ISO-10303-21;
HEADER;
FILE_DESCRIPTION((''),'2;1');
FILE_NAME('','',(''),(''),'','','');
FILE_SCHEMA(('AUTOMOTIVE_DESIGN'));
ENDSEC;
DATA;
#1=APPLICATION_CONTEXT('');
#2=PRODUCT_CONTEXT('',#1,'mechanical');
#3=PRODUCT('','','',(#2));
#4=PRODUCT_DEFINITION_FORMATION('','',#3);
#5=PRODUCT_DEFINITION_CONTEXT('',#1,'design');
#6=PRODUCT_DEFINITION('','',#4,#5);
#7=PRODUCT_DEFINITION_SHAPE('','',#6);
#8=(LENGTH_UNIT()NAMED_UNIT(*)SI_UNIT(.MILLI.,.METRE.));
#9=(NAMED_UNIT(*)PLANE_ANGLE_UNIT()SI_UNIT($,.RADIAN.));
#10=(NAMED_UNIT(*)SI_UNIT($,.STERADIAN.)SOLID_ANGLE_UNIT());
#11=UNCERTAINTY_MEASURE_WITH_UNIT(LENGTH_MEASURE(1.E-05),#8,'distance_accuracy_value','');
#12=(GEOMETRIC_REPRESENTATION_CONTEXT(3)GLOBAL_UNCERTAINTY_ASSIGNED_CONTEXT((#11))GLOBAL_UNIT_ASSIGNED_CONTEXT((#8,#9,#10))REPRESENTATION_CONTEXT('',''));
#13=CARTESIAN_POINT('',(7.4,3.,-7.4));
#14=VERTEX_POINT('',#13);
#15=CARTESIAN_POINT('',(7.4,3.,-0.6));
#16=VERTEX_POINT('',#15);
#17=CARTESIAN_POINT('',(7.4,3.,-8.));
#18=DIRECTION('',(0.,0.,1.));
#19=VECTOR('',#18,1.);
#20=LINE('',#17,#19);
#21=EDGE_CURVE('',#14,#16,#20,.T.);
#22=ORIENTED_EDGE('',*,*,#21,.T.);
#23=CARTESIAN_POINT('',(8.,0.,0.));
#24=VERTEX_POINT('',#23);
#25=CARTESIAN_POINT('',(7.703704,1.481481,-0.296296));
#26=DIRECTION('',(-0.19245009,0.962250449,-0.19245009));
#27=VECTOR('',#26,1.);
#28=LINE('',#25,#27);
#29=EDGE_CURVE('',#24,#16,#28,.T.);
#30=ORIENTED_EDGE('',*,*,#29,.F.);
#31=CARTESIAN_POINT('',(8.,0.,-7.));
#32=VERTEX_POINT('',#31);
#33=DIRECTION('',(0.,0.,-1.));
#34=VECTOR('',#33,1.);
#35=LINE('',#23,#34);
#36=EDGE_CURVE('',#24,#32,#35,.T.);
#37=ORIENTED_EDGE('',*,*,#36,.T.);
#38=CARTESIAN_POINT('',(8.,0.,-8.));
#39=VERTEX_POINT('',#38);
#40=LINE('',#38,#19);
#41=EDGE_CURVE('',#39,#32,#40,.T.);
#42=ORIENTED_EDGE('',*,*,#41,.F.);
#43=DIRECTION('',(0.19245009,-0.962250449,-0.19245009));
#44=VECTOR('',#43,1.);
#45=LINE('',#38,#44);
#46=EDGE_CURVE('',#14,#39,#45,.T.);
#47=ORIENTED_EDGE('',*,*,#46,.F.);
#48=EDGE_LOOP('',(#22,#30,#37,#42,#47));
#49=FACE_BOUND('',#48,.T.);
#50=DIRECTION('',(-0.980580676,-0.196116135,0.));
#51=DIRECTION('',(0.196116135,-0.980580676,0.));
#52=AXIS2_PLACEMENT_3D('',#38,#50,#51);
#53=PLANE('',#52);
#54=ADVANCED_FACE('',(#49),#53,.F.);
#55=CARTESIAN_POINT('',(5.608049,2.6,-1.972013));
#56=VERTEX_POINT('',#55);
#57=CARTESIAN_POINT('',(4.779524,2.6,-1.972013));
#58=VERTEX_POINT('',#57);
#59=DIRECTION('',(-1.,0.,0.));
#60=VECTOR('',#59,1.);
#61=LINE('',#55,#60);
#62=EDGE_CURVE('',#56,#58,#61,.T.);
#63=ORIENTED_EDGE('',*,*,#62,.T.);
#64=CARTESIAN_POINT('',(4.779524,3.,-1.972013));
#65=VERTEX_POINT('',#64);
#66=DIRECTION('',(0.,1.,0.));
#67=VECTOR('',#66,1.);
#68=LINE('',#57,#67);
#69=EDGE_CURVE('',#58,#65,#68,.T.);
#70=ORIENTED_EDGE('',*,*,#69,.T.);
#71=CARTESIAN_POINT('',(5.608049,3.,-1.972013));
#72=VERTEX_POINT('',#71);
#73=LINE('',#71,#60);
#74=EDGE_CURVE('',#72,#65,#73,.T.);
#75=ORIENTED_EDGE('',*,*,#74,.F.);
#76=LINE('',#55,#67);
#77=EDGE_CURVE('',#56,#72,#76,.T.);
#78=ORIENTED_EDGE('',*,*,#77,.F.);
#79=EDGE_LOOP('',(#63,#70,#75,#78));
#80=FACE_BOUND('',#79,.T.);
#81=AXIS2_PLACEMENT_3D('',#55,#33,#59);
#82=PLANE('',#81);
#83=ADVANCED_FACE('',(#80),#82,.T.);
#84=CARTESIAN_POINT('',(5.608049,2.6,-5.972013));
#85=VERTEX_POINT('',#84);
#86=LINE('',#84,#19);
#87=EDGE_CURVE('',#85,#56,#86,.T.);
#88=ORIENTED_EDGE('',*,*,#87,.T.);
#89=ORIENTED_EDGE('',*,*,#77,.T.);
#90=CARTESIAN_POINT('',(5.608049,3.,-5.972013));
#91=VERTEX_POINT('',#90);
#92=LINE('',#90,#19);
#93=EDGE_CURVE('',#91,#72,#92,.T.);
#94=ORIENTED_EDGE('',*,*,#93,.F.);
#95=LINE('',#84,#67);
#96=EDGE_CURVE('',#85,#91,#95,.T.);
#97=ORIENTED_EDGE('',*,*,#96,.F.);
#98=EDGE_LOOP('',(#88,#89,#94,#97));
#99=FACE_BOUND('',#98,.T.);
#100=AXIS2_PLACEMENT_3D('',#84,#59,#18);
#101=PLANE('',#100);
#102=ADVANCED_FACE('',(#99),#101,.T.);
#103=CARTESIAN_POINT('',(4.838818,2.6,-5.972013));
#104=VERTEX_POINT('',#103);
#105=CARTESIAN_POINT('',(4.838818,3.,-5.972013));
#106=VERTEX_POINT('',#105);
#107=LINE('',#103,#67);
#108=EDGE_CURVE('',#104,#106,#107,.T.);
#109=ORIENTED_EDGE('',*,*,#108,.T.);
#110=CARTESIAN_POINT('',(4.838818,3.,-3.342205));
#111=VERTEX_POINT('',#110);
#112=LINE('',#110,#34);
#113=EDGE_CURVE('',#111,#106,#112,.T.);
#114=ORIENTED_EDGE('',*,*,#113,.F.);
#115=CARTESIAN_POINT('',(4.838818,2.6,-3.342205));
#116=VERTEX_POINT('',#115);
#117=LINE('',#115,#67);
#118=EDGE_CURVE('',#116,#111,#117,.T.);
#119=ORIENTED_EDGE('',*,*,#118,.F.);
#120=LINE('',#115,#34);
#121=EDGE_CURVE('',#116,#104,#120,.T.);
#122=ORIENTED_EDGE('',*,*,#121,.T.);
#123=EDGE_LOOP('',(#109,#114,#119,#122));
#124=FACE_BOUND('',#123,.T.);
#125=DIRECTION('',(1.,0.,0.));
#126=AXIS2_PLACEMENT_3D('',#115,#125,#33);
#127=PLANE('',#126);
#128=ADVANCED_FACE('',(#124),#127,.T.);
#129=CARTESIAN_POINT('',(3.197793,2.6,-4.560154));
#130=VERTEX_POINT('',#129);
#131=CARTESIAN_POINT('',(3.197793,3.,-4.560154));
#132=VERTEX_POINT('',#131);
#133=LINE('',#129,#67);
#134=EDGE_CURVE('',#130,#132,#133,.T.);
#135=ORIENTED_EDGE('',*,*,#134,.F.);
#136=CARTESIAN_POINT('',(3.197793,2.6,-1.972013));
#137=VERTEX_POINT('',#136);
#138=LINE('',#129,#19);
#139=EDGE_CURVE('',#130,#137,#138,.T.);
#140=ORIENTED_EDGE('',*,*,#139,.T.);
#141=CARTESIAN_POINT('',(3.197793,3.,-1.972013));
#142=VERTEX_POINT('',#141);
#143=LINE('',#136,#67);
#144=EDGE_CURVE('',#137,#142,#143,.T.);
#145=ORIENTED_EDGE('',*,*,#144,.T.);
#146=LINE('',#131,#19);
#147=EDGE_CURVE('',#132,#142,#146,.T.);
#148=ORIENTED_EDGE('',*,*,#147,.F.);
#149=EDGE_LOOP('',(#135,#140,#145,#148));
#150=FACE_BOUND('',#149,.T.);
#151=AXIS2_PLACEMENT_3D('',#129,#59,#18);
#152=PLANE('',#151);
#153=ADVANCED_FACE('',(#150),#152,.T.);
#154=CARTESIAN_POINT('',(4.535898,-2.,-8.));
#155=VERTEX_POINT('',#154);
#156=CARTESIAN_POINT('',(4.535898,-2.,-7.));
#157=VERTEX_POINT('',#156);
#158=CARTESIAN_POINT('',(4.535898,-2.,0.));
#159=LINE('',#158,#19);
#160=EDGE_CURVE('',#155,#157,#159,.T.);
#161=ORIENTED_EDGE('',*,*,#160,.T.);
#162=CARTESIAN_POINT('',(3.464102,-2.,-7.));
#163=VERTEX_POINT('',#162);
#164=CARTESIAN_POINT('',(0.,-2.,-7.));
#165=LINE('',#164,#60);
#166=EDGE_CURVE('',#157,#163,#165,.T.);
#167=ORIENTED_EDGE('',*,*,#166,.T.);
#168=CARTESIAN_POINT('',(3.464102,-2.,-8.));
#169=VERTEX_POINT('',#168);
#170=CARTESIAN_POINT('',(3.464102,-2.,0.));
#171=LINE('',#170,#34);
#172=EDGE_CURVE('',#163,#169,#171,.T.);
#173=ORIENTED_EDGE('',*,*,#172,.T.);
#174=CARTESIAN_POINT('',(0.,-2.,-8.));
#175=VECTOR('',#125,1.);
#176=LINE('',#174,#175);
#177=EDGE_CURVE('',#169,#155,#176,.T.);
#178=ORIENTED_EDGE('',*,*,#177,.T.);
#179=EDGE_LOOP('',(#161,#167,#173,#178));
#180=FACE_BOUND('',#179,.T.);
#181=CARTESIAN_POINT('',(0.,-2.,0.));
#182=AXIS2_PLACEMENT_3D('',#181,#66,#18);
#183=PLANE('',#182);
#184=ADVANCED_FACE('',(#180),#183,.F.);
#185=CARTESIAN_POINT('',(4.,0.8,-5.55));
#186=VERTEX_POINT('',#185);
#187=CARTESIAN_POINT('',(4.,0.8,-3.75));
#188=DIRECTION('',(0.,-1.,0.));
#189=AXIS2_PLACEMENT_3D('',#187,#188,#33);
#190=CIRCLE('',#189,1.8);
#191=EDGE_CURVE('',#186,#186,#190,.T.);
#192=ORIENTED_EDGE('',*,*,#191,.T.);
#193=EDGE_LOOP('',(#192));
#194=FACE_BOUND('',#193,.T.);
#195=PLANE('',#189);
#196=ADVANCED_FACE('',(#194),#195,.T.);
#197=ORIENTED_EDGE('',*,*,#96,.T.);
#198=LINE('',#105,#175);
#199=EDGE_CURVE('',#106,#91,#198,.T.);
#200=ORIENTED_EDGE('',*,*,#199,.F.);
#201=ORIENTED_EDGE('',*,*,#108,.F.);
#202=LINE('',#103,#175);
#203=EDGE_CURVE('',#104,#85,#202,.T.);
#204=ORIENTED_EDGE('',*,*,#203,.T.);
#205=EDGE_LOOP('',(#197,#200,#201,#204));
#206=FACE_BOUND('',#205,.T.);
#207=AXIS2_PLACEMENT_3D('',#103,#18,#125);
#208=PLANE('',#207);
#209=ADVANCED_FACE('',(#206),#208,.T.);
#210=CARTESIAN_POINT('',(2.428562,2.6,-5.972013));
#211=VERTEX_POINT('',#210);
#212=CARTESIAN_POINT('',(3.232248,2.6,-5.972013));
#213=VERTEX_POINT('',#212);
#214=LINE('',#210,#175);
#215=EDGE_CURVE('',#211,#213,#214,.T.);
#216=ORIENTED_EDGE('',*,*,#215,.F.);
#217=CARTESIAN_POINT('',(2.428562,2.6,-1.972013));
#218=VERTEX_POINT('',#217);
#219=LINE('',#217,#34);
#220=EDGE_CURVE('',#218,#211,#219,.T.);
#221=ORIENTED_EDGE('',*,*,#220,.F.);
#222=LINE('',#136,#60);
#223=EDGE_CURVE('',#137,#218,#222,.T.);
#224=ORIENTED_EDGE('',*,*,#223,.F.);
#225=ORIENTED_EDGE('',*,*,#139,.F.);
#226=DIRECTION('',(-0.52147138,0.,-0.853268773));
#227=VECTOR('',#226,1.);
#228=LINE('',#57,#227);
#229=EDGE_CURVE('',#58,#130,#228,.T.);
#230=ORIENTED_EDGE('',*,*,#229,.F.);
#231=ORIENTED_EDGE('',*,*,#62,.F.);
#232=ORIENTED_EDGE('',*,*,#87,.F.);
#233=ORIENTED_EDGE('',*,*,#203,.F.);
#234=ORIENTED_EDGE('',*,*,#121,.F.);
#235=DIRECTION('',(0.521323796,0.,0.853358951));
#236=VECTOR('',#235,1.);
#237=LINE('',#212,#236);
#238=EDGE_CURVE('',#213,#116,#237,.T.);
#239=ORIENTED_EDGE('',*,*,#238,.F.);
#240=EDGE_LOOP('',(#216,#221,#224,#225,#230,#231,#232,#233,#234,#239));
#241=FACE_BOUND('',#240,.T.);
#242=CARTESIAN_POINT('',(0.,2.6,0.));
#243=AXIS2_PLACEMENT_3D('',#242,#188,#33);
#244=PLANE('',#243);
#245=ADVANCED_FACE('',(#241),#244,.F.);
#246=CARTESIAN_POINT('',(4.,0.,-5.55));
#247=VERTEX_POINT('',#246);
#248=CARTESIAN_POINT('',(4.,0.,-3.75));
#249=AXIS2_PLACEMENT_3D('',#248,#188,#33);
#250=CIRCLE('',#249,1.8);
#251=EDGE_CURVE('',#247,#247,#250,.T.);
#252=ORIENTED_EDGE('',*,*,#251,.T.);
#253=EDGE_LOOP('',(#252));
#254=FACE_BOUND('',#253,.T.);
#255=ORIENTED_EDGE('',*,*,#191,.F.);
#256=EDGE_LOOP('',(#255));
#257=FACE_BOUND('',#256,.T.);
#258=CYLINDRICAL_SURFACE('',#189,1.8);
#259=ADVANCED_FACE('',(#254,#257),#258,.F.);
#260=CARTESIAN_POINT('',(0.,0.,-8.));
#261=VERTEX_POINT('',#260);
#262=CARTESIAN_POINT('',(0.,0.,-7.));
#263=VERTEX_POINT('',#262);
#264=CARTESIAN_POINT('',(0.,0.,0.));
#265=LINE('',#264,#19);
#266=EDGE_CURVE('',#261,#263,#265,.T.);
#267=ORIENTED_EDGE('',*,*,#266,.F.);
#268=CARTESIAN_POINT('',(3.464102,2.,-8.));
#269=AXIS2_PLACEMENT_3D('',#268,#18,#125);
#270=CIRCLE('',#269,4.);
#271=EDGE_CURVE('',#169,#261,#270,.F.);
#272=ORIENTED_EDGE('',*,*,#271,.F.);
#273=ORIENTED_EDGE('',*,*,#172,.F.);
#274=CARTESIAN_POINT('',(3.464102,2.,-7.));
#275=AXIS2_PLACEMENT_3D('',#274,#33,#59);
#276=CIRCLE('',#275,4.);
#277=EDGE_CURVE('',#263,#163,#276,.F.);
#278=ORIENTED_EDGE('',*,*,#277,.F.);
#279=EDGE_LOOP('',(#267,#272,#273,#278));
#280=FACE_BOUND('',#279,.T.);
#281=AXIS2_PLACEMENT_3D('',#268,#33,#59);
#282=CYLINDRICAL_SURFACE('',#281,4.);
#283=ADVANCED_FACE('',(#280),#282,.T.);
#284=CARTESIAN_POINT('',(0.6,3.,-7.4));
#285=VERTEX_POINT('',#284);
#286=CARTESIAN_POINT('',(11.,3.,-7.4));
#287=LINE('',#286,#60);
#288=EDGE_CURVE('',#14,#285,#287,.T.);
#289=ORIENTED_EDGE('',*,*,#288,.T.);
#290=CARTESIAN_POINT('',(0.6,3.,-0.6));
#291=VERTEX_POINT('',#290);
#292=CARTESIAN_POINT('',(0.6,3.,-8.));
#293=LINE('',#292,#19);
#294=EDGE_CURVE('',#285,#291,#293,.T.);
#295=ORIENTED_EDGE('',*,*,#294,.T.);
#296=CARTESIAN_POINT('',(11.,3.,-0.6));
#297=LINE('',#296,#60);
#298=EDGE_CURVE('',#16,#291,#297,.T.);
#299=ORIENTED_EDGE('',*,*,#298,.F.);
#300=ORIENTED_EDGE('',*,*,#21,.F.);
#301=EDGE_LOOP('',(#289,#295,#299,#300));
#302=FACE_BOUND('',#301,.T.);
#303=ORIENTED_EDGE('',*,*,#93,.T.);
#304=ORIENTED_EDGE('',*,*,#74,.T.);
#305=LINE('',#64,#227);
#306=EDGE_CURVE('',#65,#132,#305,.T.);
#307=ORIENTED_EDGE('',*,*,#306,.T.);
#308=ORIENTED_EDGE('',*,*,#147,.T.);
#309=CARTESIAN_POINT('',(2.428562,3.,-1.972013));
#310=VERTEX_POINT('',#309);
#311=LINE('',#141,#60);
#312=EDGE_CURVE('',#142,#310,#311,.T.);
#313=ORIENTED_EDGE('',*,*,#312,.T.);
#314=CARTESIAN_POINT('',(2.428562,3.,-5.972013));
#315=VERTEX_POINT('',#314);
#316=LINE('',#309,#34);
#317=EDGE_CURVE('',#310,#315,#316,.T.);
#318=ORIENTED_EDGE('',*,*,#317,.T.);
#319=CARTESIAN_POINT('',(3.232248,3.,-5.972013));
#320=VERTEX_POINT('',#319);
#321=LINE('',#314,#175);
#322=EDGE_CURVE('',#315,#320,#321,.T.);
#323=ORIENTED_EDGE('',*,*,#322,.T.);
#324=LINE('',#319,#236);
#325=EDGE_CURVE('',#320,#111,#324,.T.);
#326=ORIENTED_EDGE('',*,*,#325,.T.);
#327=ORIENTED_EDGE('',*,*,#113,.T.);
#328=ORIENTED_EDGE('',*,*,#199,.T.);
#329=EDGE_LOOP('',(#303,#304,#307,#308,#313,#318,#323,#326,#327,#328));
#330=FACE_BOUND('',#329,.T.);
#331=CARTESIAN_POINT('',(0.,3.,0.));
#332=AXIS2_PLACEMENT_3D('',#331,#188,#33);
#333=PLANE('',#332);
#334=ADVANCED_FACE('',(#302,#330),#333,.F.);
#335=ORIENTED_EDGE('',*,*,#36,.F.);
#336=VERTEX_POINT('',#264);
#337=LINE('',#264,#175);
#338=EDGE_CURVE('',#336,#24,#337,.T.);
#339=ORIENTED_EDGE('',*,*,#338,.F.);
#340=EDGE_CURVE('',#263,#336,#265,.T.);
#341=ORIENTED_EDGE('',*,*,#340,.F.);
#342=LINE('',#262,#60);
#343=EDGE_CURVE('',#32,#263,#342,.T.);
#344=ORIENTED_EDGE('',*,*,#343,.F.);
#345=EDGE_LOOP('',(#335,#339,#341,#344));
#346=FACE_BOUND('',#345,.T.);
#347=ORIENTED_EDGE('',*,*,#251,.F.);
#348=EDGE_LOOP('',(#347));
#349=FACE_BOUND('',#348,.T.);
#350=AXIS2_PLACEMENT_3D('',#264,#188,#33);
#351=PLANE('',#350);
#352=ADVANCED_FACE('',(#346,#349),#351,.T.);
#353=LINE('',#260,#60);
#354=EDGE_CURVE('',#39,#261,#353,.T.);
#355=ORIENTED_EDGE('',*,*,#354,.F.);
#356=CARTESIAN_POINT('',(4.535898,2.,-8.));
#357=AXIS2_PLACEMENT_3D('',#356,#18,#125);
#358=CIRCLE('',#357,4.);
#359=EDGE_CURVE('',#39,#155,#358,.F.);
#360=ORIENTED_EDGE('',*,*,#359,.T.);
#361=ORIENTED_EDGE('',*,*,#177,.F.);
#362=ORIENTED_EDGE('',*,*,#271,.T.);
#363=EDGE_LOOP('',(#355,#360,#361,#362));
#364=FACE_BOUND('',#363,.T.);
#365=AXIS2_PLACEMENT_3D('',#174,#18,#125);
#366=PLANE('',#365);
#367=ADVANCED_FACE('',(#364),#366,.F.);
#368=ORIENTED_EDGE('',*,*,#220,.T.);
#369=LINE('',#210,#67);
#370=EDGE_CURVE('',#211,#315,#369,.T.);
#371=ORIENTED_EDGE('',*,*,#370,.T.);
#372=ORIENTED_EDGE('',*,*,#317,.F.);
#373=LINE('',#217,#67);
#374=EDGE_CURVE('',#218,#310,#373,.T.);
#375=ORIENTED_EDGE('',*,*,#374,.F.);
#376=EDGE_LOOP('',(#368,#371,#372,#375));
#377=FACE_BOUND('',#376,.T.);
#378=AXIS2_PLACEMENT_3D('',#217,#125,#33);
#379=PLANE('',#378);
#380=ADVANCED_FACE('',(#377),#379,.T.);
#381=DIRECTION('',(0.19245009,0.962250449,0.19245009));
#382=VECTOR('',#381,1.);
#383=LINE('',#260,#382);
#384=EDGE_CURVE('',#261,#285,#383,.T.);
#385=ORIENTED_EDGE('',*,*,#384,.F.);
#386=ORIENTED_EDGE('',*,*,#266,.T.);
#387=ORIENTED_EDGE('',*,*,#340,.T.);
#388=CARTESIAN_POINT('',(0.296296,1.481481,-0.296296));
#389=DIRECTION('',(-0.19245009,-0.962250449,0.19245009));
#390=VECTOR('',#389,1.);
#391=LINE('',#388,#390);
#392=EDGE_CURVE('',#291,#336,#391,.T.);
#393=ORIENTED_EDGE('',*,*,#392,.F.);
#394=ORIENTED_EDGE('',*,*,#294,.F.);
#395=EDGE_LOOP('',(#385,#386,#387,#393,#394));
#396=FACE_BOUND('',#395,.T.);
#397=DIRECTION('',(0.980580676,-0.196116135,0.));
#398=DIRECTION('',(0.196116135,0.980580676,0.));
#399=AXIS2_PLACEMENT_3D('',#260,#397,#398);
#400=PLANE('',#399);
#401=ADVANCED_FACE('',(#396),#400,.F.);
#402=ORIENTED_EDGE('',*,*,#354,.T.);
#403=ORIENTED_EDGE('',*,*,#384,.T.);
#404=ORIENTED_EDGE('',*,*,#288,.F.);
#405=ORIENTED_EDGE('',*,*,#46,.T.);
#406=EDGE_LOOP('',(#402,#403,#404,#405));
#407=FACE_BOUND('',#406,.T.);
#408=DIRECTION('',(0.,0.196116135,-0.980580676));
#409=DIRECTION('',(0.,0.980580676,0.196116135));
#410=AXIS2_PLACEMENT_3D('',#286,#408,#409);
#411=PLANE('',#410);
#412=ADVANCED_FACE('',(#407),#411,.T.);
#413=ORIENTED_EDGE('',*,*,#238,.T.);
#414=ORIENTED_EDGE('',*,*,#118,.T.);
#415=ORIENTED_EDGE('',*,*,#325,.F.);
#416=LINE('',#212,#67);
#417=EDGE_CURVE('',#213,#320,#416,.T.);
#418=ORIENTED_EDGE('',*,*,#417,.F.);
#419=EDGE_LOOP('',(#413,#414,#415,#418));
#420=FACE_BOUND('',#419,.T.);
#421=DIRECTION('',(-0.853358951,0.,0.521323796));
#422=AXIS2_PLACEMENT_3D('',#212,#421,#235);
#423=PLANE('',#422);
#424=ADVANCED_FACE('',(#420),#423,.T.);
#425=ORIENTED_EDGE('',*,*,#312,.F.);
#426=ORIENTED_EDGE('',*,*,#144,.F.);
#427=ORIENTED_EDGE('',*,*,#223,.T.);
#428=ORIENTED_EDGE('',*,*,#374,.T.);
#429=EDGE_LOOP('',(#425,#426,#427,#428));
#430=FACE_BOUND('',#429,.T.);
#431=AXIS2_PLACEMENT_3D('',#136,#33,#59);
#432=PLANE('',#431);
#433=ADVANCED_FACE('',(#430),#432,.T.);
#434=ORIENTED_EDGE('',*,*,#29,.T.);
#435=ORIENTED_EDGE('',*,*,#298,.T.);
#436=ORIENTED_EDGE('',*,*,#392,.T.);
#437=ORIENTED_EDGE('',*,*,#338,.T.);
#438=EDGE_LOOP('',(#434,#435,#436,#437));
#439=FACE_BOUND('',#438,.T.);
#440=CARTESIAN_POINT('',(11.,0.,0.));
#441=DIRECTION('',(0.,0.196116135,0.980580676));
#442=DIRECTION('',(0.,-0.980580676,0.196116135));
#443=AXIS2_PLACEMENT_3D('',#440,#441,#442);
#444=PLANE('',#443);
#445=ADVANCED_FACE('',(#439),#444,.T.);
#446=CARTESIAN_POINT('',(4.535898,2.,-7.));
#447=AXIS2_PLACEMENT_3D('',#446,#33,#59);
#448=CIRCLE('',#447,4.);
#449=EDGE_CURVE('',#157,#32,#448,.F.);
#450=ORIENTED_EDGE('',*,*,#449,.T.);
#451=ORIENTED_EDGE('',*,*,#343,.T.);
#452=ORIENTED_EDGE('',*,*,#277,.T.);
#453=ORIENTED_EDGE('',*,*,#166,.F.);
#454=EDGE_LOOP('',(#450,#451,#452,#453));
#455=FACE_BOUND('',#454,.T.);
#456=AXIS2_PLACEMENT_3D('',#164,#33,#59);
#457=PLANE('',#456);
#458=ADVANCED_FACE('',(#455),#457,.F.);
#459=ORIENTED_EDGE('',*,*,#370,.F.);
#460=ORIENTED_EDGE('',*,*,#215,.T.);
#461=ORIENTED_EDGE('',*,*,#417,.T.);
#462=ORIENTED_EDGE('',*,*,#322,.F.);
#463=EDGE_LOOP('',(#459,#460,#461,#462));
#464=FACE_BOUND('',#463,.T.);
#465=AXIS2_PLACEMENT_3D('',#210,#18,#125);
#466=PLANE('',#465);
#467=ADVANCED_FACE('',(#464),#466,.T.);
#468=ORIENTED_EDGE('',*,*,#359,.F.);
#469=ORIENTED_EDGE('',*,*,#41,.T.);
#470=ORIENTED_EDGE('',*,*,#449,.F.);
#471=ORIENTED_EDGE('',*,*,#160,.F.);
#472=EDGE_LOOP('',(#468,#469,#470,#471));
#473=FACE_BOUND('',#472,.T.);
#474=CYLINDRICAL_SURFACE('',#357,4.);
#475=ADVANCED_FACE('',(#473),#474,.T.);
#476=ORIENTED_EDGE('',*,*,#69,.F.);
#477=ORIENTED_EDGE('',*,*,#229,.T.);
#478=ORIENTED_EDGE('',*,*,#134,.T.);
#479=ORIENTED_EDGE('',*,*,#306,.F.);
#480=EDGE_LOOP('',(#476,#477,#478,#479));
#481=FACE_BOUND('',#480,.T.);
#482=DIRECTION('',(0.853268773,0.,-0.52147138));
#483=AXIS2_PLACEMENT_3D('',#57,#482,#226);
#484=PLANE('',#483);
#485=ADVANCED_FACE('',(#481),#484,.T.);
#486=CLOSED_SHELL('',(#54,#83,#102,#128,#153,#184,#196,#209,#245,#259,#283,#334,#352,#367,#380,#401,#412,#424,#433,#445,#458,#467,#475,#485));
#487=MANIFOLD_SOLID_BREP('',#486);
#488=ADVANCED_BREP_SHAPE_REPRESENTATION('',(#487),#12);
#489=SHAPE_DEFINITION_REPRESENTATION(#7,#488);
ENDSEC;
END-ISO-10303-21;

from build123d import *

# Parameters (mm, degrees)
SKETCH1_W               = 8
SKETCH1_H               = 8
BOSS_EXTRUDE1_DEPTH     = 3
CUT_EXTRUDE1_DEPTH      = 12.704699911
CUT_EXTRUDE1_DEPTH_BACK = 12.704699911
CUT_EXTRUDE2_DEPTH      = 11
SKETCH4_R               = 1.8
CUT_EXTRUDE3_DEPTH      = 0.8
SKETCH5_W               = 8
SKETCH5_H               = 1
BOSS_EXTRUDE2_DEPTH     = 2
FILLET1_R               = 4
CUT_EXTRUDE4_DEPTH      = 0.4


with BuildPart() as part:
    # Sketch1 → Boss-Extrude1 (new body)
    with BuildSketch(Plane(origin=(0, 0, 0), x_dir=(1, 0, 0), z_dir=(0, 1, 0))):
        with Locations((4, 4)):
            Rectangle(SKETCH1_W, SKETCH1_H)
    extrude(amount=BOSS_EXTRUDE1_DEPTH)

    # Sketch2 → Cut-Extrude1 (cut, two sides: drawn at the far end of the back side and taken through both)
    with BuildSketch(Plane.XY.offset(-CUT_EXTRUDE1_DEPTH_BACK)):
        Polygon((0, 0), (0.6, 3), (0, 3), align=None)
        Polygon((8, 0), (7.4, 3), (8, 3), align=None)
    extrude(amount=CUT_EXTRUDE1_DEPTH + CUT_EXTRUDE1_DEPTH_BACK, mode=Mode.SUBTRACT)

    # Sketch3 → Cut-Extrude2 (cut)
    with BuildSketch(Plane(origin=(0, 0, 0), x_dir=(0, 0, -1), z_dir=(1, 0, 0))):
        Polygon((0, 0), (0.6, 3), (0, 3), align=None)
        Polygon((8, 3), (7.4, 3), (8, 0), align=None)
    extrude(amount=CUT_EXTRUDE2_DEPTH, mode=Mode.SUBTRACT)

    # Sketch4 → Cut-Extrude3 (cut)
    with BuildSketch(Plane.XZ):
        with Locations(Location((4, -3.75, 0), (0, 0, 270))):
            Circle(SKETCH4_R)
    extrude(amount=-CUT_EXTRUDE3_DEPTH, mode=Mode.SUBTRACT)

    # Sketch5 → Boss-Extrude2 (add)
    with BuildSketch(Plane.XZ):
        with Locations((4, -7.5)):
            Rectangle(SKETCH5_W, SKETCH5_H)
    extrude(amount=BOSS_EXTRUDE2_DEPTH)

    # Fillet1
    # the kernel refuses this fillet: 4 mm, written as the material it takes off along each edge
    with BuildSketch(Plane(origin=(8, -2, -16.660254038), x_dir=(0, 1, 0), z_dir=(0, 0, 1)), Plane(origin=(0, -2, 1.660254038), x_dir=(0, 1, 0), z_dir=(0, 0, -1))) as fillet1_piece_1:
        with BuildLine():
            CenterArc((4, 3.464101615), FILLET1_R, 180, 60)
            Line((0, 3.464101615), (-0.08, 3.464101615))
            Line((-0.08, 3.464101615), (-0.08, 0))
            Line((-0.08, 0), (0, -0.08))
            ThreePointArc((0, -0.08), (1, -0.08), (1.96, -0.069282032))
            Line((1.96, -0.069282032), (2, 0))
        make_face()
    extrude(amount=18.320508076, mode=Mode.SUBTRACT)

    # Sketch6 → Cut-Extrude4 (cut)
    with BuildSketch(Plane(origin=(0, 3, 0), x_dir=(1, 0, 0), z_dir=(0, 1, 0))):
        Polygon((2.428562008, 1.972012859), (2.428562008, 5.972012859), (3.232247906, 5.972012859), (4.838818418, 3.342205167), (4.838818418, 5.972012859), (5.608049188, 5.972012859), (5.608049188, 1.972012859), (4.779523547, 1.972012859), (3.197792777, 4.560153885), (3.197792777, 1.972012859), align=None)
    extrude(amount=-CUT_EXTRUDE4_DEPTH, mode=Mode.SUBTRACT)


solid = part.part
